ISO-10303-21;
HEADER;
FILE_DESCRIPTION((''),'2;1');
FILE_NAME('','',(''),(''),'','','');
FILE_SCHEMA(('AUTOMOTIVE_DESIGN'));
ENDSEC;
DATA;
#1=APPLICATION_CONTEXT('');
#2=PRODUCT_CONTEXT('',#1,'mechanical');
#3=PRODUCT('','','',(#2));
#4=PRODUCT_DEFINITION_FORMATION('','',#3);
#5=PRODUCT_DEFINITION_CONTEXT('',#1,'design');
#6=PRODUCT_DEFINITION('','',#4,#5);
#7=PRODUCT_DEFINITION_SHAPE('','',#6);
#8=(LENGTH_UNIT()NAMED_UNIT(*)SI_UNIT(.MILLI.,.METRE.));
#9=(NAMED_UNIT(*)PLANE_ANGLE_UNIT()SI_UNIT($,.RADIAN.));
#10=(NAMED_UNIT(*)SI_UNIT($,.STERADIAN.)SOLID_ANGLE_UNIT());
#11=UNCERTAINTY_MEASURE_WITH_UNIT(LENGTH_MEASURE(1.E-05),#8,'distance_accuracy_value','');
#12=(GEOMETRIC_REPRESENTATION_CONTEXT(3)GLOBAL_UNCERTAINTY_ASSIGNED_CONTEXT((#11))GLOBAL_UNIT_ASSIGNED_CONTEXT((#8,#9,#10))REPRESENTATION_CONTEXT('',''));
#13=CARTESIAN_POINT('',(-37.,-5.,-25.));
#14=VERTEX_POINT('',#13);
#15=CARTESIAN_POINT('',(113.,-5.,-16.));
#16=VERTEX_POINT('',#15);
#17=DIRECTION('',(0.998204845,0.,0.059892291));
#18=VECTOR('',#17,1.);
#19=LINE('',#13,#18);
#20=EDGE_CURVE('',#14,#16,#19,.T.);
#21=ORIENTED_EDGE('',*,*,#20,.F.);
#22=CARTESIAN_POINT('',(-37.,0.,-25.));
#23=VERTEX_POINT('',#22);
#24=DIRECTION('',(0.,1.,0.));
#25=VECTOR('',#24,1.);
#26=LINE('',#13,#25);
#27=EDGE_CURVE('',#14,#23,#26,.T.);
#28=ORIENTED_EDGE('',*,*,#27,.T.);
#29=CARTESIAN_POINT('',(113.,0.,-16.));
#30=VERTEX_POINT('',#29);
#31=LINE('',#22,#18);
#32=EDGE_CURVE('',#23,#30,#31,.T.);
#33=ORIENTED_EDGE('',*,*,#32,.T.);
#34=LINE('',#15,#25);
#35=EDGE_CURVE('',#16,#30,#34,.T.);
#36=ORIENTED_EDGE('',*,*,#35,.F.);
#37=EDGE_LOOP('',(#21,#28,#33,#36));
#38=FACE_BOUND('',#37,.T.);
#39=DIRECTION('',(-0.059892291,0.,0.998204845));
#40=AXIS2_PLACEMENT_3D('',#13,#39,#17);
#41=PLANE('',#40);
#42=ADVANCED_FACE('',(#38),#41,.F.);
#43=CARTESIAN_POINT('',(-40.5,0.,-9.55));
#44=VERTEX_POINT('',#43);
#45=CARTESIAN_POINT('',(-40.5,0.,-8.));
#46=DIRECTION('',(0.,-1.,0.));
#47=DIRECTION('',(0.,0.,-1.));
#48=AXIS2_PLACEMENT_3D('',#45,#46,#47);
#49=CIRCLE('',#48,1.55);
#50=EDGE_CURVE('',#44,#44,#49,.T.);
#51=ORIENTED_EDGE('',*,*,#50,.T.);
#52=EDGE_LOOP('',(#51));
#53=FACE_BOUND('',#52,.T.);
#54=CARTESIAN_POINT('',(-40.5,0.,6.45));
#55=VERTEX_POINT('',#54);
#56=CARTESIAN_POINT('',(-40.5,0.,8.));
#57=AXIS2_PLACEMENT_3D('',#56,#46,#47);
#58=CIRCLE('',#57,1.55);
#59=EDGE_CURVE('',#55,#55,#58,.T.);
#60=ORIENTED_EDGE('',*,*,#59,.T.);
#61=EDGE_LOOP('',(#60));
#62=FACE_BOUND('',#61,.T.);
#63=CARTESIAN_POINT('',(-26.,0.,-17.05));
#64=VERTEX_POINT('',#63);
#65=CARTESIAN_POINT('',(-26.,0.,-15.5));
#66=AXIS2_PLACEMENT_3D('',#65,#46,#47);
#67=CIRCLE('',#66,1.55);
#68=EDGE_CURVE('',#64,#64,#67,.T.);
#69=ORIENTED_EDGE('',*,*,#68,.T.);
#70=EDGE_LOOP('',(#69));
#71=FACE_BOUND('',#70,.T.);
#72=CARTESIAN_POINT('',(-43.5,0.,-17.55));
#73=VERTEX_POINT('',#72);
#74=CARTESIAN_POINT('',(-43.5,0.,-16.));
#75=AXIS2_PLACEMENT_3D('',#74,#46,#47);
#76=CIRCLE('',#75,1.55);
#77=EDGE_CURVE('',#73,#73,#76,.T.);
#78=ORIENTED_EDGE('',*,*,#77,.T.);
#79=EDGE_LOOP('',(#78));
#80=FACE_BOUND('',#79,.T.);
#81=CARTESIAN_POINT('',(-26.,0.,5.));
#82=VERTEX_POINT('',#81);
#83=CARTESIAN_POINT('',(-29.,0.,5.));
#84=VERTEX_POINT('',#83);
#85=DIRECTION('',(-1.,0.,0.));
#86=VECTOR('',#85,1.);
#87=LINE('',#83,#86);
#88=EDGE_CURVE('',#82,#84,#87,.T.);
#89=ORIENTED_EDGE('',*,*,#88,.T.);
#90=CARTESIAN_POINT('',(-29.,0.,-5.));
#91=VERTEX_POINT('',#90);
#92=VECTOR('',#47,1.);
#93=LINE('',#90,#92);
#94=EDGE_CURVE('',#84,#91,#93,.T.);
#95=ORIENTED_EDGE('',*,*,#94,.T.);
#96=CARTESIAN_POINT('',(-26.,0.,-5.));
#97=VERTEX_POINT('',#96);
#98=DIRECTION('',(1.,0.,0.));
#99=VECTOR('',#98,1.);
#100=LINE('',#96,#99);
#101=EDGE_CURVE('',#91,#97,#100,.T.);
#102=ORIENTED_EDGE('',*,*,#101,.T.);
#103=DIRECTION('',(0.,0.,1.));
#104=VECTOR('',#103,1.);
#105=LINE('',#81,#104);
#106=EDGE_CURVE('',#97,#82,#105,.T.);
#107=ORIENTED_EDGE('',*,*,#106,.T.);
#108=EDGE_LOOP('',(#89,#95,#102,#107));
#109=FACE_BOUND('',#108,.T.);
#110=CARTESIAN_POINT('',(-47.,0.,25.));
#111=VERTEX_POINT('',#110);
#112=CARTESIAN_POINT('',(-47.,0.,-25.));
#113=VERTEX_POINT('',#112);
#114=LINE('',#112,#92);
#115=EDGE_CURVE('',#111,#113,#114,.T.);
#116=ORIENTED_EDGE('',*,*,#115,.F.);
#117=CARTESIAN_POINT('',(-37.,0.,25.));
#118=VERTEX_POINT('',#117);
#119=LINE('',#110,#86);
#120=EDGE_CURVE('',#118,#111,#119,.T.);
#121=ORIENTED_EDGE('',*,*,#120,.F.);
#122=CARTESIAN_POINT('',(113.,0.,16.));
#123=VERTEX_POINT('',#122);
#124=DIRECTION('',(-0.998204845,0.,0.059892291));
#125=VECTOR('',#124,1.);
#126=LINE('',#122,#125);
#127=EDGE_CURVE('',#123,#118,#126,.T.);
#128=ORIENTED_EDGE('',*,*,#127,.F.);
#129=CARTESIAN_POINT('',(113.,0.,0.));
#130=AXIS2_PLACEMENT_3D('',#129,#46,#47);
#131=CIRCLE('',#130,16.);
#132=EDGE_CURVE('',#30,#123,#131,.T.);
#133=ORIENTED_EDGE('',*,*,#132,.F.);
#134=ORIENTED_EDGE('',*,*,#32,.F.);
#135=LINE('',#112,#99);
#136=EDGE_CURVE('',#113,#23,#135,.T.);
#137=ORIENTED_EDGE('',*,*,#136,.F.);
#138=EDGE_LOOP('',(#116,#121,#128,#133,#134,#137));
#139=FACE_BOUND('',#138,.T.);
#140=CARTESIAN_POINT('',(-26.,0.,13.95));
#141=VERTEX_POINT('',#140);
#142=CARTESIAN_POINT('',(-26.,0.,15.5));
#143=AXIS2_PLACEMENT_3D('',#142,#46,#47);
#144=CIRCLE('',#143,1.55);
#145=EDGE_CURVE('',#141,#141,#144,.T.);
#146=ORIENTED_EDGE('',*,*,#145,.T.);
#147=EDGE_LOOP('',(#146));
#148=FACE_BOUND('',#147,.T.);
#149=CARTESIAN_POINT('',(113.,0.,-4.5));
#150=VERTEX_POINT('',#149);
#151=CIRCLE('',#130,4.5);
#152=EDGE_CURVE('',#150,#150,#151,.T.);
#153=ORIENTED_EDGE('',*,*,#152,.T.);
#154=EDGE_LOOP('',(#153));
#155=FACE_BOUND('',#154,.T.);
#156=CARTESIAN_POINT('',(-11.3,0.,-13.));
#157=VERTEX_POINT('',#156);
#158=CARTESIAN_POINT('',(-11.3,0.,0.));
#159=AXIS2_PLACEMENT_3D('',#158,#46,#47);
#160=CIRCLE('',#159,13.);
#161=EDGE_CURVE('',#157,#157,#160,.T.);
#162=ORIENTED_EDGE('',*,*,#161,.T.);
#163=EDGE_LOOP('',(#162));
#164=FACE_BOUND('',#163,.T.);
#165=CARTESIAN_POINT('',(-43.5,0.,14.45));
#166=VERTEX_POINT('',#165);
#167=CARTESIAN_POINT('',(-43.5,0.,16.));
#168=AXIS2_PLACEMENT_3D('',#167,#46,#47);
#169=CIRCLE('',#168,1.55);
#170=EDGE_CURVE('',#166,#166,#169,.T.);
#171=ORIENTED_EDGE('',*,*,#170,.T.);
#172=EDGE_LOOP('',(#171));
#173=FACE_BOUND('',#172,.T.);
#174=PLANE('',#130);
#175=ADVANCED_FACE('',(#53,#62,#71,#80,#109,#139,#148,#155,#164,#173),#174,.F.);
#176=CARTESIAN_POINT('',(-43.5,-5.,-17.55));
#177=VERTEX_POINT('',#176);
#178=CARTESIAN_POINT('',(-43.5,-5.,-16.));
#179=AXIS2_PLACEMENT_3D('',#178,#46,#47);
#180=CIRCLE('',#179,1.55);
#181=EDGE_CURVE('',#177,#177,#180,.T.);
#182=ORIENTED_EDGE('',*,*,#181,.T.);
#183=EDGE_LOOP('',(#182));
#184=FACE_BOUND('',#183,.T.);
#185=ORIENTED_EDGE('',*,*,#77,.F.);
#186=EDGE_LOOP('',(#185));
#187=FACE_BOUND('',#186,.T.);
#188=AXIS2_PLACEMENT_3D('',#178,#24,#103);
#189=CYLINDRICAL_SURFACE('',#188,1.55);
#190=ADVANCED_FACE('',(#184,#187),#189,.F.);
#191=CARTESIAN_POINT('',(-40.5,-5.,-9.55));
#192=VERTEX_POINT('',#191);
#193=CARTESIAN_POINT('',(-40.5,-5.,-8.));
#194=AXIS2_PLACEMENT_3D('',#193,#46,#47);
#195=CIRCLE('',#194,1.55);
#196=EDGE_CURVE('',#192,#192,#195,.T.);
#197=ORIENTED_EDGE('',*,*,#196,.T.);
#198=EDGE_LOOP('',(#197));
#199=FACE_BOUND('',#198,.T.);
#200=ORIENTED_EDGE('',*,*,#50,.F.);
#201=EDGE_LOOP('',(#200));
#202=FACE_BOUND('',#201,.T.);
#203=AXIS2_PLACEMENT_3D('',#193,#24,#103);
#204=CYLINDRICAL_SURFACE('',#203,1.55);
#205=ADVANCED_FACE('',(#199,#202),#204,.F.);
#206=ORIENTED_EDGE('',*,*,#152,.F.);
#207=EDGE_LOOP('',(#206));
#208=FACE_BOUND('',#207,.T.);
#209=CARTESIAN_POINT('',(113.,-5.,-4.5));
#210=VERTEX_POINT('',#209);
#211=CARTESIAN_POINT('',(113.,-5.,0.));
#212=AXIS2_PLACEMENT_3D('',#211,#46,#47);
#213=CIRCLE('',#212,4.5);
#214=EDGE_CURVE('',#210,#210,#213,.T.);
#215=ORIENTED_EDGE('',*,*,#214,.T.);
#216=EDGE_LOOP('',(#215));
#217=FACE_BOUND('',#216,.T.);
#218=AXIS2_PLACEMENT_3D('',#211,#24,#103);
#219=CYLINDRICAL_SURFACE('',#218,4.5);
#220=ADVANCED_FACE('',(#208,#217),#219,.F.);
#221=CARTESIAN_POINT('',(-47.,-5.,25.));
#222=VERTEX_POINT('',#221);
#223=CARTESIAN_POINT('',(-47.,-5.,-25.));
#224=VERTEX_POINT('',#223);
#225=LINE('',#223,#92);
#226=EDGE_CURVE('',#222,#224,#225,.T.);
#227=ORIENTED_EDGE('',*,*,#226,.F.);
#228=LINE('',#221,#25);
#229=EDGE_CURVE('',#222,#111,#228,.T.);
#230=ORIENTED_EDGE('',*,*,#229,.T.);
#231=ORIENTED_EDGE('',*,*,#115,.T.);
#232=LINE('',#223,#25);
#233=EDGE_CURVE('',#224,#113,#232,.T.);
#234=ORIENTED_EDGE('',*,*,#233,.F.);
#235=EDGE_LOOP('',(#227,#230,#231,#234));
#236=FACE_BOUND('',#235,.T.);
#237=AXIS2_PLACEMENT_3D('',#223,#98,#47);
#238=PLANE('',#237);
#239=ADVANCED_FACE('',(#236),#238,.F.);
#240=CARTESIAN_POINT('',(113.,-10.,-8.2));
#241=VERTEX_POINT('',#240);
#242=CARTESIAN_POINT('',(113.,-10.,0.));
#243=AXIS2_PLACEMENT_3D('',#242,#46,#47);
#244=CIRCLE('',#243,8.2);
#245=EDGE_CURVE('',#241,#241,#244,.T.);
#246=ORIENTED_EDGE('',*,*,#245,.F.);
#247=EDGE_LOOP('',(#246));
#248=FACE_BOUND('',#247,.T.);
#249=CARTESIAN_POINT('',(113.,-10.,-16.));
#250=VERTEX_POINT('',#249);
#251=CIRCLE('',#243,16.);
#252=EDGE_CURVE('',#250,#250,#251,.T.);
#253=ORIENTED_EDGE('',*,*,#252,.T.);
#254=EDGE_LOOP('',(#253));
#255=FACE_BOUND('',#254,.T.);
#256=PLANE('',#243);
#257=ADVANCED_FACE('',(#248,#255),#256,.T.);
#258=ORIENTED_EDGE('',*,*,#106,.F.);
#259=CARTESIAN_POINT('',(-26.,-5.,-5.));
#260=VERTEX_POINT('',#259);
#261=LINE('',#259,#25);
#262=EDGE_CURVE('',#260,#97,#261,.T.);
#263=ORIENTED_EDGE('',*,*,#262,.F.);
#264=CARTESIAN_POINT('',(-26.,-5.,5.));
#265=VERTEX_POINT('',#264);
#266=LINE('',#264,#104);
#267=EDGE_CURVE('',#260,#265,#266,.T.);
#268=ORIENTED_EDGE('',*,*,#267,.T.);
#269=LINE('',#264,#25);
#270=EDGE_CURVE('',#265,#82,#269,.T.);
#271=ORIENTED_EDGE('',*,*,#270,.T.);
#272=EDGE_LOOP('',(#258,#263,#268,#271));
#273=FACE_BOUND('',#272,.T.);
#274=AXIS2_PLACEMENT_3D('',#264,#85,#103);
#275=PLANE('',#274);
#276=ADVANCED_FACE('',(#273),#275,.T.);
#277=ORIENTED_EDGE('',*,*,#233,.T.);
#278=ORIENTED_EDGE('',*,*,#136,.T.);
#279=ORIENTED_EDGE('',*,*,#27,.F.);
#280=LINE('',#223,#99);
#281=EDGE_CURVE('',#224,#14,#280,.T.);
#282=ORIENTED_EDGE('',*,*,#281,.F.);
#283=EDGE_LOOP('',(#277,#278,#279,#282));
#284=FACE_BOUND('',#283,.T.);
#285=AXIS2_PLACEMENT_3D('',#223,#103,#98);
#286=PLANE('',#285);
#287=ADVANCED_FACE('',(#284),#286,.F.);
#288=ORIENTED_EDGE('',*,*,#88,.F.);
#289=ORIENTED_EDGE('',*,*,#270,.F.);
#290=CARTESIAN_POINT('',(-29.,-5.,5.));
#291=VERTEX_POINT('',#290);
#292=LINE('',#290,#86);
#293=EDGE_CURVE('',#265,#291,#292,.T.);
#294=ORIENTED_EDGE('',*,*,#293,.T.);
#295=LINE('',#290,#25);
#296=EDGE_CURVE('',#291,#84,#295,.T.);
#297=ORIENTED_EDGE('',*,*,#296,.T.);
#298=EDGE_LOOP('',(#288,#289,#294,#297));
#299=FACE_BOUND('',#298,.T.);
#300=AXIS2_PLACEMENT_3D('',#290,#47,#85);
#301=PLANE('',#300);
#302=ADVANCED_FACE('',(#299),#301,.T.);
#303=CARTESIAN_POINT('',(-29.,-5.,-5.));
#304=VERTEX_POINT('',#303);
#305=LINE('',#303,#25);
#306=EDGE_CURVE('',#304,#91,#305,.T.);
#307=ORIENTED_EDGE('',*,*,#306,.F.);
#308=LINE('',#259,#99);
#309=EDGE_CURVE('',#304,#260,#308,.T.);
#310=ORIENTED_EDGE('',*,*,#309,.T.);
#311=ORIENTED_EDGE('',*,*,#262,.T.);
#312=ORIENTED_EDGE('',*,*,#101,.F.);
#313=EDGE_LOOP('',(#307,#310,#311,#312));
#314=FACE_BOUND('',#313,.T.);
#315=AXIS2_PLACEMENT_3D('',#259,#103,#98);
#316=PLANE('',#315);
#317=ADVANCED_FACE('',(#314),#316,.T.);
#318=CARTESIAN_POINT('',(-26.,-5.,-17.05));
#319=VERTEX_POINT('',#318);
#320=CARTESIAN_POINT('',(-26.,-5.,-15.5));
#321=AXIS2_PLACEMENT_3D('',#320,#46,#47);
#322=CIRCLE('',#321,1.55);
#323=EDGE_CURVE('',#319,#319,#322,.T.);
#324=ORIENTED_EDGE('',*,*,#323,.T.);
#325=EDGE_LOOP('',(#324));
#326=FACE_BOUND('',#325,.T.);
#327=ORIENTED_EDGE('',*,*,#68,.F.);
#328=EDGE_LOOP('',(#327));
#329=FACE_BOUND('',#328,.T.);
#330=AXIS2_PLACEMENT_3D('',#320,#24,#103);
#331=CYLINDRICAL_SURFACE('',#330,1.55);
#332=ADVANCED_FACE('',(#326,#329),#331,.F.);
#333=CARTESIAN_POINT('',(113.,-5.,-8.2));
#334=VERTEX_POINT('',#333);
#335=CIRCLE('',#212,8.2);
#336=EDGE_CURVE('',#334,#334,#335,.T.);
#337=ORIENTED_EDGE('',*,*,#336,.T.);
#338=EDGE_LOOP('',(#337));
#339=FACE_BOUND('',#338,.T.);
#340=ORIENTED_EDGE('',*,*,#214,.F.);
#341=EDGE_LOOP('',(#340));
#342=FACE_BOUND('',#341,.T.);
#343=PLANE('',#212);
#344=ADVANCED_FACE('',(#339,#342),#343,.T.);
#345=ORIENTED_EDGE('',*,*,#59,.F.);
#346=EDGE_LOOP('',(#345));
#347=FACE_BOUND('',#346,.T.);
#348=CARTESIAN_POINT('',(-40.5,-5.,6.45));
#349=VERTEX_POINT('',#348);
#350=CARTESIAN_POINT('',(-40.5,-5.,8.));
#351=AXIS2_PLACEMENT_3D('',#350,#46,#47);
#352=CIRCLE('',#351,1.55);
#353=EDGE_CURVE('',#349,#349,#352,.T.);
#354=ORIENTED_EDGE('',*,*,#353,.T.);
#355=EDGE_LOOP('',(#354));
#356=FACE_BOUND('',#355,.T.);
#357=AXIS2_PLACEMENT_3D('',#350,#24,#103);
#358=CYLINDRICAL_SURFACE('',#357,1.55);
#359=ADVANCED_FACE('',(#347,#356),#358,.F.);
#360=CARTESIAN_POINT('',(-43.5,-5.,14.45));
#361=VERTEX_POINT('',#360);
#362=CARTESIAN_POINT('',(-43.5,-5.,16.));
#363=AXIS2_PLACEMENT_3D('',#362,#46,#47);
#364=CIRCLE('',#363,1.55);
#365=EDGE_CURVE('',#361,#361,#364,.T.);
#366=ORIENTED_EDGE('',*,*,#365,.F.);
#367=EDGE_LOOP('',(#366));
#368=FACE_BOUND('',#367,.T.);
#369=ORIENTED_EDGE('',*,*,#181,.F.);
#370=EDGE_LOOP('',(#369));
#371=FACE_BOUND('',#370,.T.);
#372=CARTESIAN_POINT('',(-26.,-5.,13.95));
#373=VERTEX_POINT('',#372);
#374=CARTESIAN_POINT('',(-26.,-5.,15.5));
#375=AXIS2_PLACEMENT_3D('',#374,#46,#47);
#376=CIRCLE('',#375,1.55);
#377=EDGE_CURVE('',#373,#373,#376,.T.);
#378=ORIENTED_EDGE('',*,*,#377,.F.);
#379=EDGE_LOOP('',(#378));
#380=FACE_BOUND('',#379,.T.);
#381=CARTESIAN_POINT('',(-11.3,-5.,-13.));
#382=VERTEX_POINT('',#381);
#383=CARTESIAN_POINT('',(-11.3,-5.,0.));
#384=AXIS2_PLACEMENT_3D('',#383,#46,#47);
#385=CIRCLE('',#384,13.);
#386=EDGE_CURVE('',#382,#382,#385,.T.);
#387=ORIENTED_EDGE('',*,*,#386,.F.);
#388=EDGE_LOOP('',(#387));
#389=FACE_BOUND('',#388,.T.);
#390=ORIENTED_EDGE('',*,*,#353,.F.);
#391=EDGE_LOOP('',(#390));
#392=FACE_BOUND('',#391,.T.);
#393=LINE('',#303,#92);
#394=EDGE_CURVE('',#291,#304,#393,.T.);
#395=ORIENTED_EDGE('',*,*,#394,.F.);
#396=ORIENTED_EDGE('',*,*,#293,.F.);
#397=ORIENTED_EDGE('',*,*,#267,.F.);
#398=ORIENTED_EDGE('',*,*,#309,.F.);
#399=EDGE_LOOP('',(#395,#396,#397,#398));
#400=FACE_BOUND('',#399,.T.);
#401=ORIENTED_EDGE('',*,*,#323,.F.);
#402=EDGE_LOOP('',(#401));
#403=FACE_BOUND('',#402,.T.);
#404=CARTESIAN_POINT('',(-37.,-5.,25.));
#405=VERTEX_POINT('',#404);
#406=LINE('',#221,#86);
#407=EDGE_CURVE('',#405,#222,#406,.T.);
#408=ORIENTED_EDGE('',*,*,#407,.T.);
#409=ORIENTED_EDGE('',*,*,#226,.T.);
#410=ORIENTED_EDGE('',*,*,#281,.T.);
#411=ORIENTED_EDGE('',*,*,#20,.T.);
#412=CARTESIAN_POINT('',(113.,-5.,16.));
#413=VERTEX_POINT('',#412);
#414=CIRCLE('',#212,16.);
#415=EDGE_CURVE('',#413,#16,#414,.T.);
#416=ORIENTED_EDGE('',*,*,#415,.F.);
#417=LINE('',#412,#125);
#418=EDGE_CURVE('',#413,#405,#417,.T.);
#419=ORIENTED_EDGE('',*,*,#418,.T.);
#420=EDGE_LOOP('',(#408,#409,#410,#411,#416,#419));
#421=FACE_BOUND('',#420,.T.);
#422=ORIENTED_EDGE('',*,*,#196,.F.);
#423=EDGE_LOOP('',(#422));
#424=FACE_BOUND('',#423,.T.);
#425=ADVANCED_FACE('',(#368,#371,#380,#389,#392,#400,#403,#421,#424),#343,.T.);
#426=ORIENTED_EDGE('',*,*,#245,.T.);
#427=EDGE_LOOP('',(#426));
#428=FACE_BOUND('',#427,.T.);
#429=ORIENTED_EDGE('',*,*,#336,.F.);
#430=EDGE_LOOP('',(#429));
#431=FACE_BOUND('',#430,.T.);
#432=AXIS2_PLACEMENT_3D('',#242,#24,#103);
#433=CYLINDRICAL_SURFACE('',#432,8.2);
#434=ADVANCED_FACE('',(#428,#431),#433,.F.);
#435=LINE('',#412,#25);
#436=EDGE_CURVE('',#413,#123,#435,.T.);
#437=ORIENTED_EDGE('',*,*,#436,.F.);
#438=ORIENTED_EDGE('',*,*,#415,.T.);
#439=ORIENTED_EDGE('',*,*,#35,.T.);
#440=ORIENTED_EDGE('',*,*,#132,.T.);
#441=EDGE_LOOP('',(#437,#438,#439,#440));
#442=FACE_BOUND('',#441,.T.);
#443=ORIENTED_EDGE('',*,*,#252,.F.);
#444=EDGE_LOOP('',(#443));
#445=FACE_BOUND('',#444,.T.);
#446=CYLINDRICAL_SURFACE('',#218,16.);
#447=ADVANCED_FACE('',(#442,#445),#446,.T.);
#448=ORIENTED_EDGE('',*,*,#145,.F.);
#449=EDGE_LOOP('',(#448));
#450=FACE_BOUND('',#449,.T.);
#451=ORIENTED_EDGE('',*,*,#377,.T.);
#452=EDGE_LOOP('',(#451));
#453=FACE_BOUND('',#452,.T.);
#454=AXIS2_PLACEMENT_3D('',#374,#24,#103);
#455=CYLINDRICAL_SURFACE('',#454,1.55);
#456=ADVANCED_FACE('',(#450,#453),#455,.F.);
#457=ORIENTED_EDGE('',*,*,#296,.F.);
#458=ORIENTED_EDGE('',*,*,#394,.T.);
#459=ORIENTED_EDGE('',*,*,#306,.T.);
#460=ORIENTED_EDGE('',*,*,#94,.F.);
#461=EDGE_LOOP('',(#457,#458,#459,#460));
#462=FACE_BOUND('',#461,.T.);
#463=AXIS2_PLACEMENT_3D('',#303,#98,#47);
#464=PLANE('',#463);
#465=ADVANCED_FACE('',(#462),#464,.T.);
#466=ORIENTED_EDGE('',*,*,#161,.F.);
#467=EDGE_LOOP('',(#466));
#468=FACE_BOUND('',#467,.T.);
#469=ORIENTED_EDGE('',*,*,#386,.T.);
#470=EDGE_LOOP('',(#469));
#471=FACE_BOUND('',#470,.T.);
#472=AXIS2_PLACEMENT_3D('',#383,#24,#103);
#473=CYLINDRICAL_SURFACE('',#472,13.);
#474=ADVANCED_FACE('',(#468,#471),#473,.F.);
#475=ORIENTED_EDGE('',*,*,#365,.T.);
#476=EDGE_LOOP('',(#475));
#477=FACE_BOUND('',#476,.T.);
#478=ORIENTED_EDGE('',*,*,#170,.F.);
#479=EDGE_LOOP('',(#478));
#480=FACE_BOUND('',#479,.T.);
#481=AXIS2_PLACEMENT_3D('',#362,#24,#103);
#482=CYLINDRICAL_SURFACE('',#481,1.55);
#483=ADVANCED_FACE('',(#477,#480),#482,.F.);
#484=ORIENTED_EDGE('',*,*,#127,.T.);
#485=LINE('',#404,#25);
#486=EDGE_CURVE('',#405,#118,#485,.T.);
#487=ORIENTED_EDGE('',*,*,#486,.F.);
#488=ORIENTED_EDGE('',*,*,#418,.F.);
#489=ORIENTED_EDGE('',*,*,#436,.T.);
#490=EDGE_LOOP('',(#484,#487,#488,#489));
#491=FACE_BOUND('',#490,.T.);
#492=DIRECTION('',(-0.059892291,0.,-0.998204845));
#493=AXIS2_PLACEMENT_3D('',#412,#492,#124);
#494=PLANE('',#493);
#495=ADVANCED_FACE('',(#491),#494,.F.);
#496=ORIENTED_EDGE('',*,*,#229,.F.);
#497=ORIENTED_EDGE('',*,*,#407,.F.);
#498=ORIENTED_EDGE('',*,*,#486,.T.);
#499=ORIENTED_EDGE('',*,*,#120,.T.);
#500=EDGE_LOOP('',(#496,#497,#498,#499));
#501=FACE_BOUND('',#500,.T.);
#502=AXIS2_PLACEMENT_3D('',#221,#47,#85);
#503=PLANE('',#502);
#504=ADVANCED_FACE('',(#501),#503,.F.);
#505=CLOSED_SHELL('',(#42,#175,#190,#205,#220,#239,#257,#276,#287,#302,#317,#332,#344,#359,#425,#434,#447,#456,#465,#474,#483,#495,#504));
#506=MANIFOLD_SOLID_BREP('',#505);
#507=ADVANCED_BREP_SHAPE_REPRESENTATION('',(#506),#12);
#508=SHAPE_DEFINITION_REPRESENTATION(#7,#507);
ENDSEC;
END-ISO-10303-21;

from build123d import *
from build123d.topology import SkipClean

# Parameters (mm, degrees)
SKETCH28_R           = 1.55
SKETCH28_R_2         = 13
SKETCH28_R_3         = 4.5
SKETCH28_W           = 10
SKETCH28_H           = 3
BOSS_EXTRUDE10_DEPTH = 5
SKETCH29_R           = 16
SKETCH29_R_2         = 8.2
BOSS_EXTRUDE11_DEPTH = 5


with BuildPart() as part:
    # Sketch28 → Boss-Extrude10 (new body)
    with BuildSketch(Plane(origin=(-32, 0, 0), x_dir=(0, 0, 1), z_dir=(0, -1, 0))):
        with BuildLine():
            Line((-25, 15), (25, 15))
            Line((25, 15), (25, 5))
            Line((25, 5), (16, -145))
            ThreePointArc((16, -145), (0, -161), (-16, -145))
            Line((-16, -145), (-25, 5))
            Line((-25, 5), (-25, 15))
        make_face()
        with Locations((8, 8.5)):
            Circle(SKETCH28_R, mode=Mode.SUBTRACT)
        with Locations((-8, 8.5)):
            Circle(SKETCH28_R, mode=Mode.SUBTRACT)
        with Locations((16, 11.5)):
            Circle(SKETCH28_R, mode=Mode.SUBTRACT)
        with Locations((-16, 11.5)):
            Circle(SKETCH28_R, mode=Mode.SUBTRACT)
        with Locations((-15.5, -6)):
            Circle(SKETCH28_R, mode=Mode.SUBTRACT)
        with Locations((15.5, -6)):
            Circle(SKETCH28_R, mode=Mode.SUBTRACT)
        with Locations((0, -20.7)):
            Circle(SKETCH28_R_2, mode=Mode.SUBTRACT)
        with Locations((0, -145)):
            Circle(SKETCH28_R_3, mode=Mode.SUBTRACT)
        with Locations((0, -4.5)):
            Rectangle(SKETCH28_W, SKETCH28_H, mode=Mode.SUBTRACT)
    extrude(amount=BOSS_EXTRUDE10_DEPTH)

    # Sketch29 → Boss-Extrude11 (add)
    with SkipClean():  # the faces are left unmerged after this step: merging them gives an invalid solid
        with BuildSketch(Plane.XZ.offset(5)):
            with Locations((113, 0)):
                Circle(SKETCH29_R)
            with Locations((113, 0)):
                Circle(SKETCH29_R_2, mode=Mode.SUBTRACT)
        extrude(amount=BOSS_EXTRUDE11_DEPTH)
    add(part.part.scale(1), mode=Mode.REPLACE)  # the faces are merged on a copy


solid = part.part
